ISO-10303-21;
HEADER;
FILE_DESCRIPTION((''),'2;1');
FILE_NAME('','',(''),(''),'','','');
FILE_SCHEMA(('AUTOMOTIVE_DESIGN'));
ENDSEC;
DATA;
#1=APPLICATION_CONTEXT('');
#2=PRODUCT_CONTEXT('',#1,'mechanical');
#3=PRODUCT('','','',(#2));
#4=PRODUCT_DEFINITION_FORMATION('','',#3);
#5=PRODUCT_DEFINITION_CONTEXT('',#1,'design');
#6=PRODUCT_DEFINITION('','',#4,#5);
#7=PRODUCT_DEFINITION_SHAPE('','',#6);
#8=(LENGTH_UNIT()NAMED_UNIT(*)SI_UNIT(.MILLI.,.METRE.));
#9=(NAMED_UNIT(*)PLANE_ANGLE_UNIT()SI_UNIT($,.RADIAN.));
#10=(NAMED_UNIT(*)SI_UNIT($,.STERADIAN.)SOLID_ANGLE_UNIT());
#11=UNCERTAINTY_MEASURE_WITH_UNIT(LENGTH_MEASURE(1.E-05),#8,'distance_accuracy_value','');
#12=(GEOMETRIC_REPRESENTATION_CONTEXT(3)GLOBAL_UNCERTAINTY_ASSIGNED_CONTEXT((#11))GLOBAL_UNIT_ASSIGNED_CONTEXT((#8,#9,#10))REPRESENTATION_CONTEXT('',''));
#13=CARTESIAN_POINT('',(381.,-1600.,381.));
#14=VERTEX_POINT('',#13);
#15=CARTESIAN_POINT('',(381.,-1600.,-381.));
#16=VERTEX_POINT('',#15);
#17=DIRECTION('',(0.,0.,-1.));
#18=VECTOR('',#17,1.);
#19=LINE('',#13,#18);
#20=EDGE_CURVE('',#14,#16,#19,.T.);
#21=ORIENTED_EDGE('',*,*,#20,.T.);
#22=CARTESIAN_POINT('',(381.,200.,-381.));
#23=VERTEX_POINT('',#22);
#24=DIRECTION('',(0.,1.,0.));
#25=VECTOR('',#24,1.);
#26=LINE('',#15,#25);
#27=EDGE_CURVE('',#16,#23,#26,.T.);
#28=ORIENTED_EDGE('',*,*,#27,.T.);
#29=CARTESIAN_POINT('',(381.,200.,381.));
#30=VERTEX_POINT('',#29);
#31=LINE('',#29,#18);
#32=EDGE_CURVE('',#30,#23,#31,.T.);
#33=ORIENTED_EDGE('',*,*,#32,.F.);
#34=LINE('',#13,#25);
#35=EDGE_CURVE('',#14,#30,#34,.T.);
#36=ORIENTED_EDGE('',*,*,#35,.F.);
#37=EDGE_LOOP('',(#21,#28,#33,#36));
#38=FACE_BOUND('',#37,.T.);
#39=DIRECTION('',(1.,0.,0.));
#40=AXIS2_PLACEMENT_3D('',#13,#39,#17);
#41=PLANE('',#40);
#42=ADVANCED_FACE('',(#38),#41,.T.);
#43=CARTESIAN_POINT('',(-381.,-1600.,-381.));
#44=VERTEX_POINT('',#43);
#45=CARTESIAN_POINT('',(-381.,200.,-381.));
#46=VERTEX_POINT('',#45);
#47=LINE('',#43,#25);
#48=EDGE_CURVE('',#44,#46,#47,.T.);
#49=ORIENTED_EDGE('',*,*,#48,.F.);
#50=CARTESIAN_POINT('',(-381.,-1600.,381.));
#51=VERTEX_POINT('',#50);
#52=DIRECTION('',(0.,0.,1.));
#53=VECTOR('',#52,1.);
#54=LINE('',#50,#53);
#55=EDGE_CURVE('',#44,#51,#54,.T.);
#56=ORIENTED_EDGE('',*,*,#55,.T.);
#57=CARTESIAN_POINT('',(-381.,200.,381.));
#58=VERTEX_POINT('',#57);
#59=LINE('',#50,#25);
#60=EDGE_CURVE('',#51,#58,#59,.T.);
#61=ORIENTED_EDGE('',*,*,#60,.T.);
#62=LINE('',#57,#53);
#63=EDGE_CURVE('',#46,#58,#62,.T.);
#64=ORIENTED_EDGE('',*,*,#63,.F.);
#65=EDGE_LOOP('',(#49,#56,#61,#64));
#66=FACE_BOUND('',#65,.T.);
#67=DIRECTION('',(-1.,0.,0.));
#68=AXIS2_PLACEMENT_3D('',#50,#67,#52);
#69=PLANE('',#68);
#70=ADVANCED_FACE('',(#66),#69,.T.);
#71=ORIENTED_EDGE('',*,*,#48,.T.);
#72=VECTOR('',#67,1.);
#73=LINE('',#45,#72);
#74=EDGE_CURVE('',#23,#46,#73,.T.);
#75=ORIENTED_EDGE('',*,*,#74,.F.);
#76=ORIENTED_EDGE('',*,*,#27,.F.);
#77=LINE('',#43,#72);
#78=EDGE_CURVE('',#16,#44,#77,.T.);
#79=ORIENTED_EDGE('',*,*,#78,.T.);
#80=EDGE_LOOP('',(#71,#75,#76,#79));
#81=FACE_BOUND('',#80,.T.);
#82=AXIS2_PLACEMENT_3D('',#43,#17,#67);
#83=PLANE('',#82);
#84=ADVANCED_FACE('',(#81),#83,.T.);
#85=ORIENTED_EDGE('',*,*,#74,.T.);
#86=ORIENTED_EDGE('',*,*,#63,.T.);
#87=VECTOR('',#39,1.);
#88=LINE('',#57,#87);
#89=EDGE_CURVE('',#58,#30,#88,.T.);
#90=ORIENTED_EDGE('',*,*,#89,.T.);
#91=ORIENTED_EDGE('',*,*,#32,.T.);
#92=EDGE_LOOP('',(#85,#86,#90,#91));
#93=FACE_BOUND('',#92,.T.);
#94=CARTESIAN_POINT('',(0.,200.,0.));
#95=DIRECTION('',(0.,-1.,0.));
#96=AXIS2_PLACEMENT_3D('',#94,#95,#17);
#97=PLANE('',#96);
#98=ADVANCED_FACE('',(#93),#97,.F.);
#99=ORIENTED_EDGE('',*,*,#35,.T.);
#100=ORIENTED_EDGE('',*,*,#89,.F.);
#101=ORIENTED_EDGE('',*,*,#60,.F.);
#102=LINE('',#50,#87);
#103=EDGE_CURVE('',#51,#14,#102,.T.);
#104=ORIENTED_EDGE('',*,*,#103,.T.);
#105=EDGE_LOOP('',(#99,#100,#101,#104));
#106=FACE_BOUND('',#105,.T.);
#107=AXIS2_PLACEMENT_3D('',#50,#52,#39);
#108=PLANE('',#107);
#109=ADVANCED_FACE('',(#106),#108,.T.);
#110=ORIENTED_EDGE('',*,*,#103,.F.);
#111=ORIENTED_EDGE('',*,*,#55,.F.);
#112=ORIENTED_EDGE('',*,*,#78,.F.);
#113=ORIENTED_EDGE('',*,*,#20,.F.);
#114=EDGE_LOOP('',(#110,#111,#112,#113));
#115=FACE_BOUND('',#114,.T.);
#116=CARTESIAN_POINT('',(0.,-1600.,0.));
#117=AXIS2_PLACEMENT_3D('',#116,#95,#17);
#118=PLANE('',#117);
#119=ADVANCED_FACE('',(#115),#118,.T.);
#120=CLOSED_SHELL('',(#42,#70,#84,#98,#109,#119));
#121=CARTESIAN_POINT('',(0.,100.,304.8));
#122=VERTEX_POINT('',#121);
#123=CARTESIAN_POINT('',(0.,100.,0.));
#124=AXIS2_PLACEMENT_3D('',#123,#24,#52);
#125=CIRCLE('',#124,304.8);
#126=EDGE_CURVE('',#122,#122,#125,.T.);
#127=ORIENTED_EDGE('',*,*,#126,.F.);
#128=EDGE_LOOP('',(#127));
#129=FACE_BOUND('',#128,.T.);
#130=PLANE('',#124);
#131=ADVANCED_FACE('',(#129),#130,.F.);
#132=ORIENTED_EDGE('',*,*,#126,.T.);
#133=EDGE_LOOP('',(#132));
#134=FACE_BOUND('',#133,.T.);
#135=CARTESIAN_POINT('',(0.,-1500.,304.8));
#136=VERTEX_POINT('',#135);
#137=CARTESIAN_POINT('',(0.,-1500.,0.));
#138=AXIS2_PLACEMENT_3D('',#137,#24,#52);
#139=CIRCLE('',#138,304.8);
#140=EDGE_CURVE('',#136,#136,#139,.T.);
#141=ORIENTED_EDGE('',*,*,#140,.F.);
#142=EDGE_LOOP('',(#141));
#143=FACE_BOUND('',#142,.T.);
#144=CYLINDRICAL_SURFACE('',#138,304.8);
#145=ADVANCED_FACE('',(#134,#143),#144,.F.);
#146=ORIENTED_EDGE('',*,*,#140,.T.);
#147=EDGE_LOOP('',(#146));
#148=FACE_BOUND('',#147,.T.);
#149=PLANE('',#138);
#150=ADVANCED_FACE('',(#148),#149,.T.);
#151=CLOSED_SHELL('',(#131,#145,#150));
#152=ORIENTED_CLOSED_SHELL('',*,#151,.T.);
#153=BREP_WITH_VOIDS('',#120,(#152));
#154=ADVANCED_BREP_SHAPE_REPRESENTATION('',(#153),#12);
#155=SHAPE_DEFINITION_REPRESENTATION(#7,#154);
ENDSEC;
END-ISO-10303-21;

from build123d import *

# Parameters (mm, degrees)
BOSS_EXTRUDE1_DEPTH      = 200
BOSS_EXTRUDE1_DEPTH_BACK = 1600
SKETCH1_W                = 762
SKETCH1_H                = 762
CAVITY1_START            = -1500
CAVITY1_OUTLINE_R        = 304.8
CAVITY1_DEPTH            = 1600


# Read off the part's stored shape, not the designer's step: Cavity1
with BuildPart() as part:
    # Sketch1 → Boss-Extrude1 (new, two sides: drawn at the far end of the back side and taken through both)
    with BuildSketch(Plane(origin=(0, 0, 0), x_dir=(1, 0, 0), z_dir=(0, 1, 0)).offset(-BOSS_EXTRUDE1_DEPTH_BACK)):
        Rectangle(SKETCH1_W, SKETCH1_H)
    extrude(amount=BOSS_EXTRUDE1_DEPTH + BOSS_EXTRUDE1_DEPTH_BACK)

    # Cavity1 outline → Cavity1 (cut)
    with BuildSketch(Plane(origin=(0, 0, 0), x_dir=(1, 0, 0), z_dir=(0, 1, 0)).offset(CAVITY1_START)):
        Circle(CAVITY1_OUTLINE_R)
    extrude(amount=CAVITY1_DEPTH, mode=Mode.SUBTRACT)


solid = part.part
